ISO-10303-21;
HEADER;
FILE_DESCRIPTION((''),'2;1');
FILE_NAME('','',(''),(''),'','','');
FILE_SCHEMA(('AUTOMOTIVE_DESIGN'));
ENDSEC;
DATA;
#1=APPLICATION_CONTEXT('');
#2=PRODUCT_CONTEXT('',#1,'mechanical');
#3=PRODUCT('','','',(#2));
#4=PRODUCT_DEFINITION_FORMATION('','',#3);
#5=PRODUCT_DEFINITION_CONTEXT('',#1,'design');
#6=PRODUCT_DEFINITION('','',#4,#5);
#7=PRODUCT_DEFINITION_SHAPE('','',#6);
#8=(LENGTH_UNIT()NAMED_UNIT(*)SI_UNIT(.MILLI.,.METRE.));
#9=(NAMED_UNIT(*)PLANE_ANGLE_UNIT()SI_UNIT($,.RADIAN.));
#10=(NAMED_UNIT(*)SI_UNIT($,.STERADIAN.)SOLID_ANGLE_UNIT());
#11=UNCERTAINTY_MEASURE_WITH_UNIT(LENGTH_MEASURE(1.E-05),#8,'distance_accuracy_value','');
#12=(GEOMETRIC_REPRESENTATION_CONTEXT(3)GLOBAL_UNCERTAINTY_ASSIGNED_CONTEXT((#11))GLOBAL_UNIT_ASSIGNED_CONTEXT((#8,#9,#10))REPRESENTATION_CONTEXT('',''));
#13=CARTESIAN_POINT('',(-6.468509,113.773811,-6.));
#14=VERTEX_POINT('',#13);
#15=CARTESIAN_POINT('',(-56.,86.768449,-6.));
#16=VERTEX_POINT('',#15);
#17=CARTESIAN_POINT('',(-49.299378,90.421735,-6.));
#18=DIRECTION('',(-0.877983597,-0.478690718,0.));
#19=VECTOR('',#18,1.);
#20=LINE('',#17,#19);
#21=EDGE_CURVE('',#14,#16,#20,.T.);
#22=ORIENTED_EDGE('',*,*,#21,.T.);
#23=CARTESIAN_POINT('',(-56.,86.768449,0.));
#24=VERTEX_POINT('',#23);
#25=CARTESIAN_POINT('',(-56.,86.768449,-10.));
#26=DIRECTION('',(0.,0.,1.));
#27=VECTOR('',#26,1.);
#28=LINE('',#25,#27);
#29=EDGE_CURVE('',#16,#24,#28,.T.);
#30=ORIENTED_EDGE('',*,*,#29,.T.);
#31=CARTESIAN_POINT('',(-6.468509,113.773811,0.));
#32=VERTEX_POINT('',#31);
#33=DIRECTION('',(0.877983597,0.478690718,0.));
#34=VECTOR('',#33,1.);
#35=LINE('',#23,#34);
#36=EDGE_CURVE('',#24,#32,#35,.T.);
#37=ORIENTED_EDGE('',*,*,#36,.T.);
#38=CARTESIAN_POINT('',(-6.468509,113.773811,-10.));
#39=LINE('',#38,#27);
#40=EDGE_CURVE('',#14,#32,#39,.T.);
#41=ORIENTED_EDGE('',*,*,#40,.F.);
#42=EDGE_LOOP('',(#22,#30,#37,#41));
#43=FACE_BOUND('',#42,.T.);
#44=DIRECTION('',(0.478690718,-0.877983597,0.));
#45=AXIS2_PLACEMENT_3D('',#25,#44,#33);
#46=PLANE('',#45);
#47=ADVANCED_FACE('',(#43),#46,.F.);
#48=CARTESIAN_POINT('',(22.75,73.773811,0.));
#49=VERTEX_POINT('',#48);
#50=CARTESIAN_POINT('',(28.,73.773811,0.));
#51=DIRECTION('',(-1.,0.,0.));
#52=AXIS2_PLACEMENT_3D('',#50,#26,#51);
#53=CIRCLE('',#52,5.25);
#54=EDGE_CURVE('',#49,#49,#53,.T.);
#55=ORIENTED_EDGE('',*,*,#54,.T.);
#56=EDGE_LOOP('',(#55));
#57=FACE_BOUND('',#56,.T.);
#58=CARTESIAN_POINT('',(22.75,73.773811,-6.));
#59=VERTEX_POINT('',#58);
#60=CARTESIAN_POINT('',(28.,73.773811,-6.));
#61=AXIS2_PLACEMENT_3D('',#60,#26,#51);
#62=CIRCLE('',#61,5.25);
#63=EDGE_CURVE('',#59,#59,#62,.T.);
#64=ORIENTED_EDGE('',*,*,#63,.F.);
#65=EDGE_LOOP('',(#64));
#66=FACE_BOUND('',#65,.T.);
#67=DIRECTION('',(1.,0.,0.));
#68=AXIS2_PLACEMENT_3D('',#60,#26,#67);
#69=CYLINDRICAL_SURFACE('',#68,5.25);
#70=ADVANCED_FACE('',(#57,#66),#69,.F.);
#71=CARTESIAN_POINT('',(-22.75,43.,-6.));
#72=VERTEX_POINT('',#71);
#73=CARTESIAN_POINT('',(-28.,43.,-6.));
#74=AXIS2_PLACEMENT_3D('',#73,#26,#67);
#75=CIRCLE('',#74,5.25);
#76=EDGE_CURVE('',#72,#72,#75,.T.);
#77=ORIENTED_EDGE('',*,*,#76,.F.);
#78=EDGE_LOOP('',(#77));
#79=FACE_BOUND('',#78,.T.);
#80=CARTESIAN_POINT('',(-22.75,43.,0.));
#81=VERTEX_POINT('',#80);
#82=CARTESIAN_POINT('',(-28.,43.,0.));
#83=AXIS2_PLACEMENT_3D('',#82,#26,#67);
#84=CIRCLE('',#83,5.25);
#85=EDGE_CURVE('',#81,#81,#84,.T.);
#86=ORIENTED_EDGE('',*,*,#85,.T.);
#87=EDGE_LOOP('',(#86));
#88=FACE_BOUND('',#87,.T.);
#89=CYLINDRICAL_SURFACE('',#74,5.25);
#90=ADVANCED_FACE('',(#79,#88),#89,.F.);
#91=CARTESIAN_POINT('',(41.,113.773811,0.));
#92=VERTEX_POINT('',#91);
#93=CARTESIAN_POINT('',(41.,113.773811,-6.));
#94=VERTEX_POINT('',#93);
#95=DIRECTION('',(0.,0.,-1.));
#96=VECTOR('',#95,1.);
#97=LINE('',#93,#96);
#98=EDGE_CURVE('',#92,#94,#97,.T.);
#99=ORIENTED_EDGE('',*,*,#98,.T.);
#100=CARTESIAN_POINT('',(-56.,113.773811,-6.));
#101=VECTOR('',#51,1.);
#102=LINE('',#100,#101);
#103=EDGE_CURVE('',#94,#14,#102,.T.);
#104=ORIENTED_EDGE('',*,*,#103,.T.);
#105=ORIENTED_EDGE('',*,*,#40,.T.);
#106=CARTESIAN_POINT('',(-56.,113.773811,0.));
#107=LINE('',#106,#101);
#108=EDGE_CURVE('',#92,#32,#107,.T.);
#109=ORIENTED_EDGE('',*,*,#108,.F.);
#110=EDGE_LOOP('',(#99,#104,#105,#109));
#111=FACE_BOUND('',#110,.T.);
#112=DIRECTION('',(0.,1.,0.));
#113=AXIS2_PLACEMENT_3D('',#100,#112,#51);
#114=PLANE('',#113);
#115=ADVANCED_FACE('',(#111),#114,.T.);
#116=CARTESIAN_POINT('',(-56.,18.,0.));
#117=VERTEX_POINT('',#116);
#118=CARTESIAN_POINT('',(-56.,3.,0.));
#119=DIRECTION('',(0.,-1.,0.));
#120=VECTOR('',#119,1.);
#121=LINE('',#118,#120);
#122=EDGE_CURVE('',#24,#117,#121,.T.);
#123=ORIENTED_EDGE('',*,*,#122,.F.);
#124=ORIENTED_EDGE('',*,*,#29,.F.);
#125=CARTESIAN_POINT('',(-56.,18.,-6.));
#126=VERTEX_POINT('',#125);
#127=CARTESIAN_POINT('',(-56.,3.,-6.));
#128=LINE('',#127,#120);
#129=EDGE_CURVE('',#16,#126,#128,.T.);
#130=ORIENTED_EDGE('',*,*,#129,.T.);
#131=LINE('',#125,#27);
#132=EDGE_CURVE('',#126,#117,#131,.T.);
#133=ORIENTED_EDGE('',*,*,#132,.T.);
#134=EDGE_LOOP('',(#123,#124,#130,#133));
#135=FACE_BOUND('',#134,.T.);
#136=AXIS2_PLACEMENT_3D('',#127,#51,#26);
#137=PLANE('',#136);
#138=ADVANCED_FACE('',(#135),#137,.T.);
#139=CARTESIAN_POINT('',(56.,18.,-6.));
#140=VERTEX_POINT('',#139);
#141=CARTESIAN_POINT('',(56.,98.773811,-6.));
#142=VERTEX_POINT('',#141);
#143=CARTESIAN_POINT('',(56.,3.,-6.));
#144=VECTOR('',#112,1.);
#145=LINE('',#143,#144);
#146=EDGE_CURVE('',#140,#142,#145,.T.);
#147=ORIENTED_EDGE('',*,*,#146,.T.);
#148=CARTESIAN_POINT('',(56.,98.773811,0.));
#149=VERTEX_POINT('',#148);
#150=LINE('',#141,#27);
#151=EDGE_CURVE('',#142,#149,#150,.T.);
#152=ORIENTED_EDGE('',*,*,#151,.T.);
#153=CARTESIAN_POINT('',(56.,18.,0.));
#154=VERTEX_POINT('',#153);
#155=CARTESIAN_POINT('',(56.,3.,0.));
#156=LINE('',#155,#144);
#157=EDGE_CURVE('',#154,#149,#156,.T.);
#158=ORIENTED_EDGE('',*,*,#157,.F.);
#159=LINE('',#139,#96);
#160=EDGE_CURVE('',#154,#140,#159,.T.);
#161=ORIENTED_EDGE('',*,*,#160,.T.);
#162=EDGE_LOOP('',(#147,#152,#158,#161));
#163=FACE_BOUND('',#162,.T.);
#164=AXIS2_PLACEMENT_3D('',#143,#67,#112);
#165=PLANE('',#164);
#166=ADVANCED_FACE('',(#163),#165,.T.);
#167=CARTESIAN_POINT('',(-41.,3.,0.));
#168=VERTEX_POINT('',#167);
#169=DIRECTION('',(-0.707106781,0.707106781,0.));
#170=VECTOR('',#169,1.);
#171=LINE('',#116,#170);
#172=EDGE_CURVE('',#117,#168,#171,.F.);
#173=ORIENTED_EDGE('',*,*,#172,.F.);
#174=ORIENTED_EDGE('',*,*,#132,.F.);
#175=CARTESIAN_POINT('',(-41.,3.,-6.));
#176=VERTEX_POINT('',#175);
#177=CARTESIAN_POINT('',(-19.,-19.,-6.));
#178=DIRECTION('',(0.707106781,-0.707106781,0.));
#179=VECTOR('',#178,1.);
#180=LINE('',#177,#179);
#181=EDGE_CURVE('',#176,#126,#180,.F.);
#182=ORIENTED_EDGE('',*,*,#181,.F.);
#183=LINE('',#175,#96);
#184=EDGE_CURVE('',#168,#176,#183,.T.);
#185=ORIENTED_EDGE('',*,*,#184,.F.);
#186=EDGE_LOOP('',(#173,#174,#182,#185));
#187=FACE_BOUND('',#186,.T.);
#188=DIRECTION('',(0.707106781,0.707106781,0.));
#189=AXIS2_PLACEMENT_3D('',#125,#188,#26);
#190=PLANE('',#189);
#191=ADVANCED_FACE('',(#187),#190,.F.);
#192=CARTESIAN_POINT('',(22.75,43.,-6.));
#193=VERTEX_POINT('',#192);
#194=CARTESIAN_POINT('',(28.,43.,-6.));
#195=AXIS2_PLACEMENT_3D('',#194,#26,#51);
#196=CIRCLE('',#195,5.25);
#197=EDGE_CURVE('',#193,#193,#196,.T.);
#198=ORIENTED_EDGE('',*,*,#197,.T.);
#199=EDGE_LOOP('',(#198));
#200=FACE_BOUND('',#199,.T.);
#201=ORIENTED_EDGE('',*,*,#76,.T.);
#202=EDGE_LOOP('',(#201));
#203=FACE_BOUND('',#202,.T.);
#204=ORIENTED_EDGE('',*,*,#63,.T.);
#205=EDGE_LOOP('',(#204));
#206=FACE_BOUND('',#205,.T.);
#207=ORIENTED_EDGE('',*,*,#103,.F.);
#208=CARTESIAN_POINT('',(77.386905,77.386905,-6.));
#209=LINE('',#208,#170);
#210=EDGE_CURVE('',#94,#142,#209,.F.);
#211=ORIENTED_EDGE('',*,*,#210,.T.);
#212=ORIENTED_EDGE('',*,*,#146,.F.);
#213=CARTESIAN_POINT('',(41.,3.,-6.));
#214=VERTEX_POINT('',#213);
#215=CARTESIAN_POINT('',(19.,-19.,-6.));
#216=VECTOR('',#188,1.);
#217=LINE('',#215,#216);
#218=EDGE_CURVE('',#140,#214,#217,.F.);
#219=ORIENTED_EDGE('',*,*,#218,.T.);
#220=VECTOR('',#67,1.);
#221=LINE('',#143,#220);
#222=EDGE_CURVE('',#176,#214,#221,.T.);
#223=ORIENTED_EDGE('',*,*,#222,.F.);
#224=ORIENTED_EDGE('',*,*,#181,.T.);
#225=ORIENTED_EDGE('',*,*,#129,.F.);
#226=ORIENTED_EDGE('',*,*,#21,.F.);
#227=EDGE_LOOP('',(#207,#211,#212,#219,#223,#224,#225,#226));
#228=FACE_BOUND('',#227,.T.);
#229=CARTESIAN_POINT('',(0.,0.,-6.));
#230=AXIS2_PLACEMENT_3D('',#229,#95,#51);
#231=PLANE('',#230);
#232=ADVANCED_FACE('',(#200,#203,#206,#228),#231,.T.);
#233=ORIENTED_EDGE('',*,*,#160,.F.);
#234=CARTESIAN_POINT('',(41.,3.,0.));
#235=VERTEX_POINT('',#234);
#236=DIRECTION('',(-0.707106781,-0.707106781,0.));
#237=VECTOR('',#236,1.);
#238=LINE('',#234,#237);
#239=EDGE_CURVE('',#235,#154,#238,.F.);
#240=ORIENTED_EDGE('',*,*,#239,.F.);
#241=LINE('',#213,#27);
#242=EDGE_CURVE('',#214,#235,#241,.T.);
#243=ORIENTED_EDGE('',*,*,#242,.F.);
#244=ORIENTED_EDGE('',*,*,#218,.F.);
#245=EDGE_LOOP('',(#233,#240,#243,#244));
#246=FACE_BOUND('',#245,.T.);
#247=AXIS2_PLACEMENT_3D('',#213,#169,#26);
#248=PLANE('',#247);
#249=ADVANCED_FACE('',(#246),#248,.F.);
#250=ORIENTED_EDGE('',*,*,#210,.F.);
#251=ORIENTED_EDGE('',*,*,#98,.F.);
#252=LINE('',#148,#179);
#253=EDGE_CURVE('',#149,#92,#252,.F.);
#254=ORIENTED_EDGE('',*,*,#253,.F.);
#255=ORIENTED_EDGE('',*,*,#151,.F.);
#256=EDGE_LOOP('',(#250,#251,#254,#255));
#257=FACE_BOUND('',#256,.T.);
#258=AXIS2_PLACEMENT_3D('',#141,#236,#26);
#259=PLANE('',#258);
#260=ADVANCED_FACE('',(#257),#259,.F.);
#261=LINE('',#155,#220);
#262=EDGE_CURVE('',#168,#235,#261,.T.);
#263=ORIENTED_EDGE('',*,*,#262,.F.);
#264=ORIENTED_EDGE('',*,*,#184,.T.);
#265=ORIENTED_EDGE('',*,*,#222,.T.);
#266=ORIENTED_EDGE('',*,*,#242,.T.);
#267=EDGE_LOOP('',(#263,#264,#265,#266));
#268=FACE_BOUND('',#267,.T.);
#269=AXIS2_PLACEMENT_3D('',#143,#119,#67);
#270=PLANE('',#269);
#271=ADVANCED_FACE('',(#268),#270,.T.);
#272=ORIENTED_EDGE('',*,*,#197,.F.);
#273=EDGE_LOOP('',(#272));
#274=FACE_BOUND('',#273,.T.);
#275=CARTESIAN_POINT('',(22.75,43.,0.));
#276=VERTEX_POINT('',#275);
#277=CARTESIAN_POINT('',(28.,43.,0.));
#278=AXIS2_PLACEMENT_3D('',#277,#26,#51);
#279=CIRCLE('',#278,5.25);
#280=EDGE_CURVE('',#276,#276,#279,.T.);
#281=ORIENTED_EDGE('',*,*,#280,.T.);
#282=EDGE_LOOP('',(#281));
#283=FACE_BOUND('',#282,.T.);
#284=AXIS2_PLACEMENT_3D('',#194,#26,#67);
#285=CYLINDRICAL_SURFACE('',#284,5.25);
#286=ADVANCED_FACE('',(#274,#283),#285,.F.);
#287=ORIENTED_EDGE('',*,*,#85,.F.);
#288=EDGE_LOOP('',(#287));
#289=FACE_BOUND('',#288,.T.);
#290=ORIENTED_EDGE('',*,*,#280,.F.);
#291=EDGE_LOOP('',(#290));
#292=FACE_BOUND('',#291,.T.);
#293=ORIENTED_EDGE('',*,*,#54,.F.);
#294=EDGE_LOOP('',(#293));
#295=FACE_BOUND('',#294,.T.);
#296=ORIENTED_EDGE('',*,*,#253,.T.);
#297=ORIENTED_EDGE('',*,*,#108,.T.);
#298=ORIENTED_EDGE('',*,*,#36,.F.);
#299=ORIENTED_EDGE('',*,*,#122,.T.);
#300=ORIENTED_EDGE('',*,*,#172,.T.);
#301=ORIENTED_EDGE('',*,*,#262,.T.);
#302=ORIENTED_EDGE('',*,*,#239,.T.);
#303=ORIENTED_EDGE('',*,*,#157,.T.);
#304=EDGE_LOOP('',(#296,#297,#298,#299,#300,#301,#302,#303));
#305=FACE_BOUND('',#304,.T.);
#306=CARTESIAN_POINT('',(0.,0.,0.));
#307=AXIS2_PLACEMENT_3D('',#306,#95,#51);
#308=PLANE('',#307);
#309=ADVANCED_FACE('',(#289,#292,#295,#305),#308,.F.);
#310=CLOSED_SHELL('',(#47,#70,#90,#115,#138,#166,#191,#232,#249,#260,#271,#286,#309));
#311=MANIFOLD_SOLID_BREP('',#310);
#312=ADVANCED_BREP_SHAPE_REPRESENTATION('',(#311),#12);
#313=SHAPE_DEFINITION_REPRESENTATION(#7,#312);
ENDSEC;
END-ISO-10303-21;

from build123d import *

# Parameters (mm, degrees)
SKETCH_1_W             = 112
SKETCH_1_H             = 110.77381068
SKETCH_1_R             = 5.25
SM_BASE_FLANGE_1_DEPTH = 6
CHAMFER_1_SIZE         = 15
CUT_EXTRUDE_1_DEPTH    = 10


# Sheet-metal steps are written as plain solids
with BuildPart() as part:
    # Sketch 1 → Базовая кромка1 (new body)
    with BuildSketch(Plane.XY):
        with Locations((0, 58.38690534)):
            Rectangle(SKETCH_1_W, SKETCH_1_H)
        with Locations((-28, 43)):
            Circle(SKETCH_1_R, mode=Mode.SUBTRACT)
        with Locations(Location((28, 73.77381068, 0), (0, 0, 180))):
            Circle(SKETCH_1_R, mode=Mode.SUBTRACT)
        with Locations(Location((28, 43, 0), (0, 0, 180))):
            Circle(SKETCH_1_R, mode=Mode.SUBTRACT)
    extrude(amount=-SM_BASE_FLANGE_1_DEPTH)

    # Фаска1
    chamfer_1_edges = [part.edges().sort_by_distance(p)[0] for p in [
        (56, 3, -3),
        (-56, 3, -3),
        (-56, 113.77381068, -3),
        (56, 113.77381068, -3),
    ]]
    chamfer(chamfer_1_edges, length=CHAMFER_1_SIZE)

    # Sketch 2 → Вырез-Вытянуть1 (cut)
    with BuildSketch(Plane.XY):
        Polygon((-56, 113.77381068), (-56, 86.768448621), (-6.468509112, 113.77381068), align=None)
    extrude(amount=-CUT_EXTRUDE_1_DEPTH, mode=Mode.SUBTRACT)


solid = part.part
